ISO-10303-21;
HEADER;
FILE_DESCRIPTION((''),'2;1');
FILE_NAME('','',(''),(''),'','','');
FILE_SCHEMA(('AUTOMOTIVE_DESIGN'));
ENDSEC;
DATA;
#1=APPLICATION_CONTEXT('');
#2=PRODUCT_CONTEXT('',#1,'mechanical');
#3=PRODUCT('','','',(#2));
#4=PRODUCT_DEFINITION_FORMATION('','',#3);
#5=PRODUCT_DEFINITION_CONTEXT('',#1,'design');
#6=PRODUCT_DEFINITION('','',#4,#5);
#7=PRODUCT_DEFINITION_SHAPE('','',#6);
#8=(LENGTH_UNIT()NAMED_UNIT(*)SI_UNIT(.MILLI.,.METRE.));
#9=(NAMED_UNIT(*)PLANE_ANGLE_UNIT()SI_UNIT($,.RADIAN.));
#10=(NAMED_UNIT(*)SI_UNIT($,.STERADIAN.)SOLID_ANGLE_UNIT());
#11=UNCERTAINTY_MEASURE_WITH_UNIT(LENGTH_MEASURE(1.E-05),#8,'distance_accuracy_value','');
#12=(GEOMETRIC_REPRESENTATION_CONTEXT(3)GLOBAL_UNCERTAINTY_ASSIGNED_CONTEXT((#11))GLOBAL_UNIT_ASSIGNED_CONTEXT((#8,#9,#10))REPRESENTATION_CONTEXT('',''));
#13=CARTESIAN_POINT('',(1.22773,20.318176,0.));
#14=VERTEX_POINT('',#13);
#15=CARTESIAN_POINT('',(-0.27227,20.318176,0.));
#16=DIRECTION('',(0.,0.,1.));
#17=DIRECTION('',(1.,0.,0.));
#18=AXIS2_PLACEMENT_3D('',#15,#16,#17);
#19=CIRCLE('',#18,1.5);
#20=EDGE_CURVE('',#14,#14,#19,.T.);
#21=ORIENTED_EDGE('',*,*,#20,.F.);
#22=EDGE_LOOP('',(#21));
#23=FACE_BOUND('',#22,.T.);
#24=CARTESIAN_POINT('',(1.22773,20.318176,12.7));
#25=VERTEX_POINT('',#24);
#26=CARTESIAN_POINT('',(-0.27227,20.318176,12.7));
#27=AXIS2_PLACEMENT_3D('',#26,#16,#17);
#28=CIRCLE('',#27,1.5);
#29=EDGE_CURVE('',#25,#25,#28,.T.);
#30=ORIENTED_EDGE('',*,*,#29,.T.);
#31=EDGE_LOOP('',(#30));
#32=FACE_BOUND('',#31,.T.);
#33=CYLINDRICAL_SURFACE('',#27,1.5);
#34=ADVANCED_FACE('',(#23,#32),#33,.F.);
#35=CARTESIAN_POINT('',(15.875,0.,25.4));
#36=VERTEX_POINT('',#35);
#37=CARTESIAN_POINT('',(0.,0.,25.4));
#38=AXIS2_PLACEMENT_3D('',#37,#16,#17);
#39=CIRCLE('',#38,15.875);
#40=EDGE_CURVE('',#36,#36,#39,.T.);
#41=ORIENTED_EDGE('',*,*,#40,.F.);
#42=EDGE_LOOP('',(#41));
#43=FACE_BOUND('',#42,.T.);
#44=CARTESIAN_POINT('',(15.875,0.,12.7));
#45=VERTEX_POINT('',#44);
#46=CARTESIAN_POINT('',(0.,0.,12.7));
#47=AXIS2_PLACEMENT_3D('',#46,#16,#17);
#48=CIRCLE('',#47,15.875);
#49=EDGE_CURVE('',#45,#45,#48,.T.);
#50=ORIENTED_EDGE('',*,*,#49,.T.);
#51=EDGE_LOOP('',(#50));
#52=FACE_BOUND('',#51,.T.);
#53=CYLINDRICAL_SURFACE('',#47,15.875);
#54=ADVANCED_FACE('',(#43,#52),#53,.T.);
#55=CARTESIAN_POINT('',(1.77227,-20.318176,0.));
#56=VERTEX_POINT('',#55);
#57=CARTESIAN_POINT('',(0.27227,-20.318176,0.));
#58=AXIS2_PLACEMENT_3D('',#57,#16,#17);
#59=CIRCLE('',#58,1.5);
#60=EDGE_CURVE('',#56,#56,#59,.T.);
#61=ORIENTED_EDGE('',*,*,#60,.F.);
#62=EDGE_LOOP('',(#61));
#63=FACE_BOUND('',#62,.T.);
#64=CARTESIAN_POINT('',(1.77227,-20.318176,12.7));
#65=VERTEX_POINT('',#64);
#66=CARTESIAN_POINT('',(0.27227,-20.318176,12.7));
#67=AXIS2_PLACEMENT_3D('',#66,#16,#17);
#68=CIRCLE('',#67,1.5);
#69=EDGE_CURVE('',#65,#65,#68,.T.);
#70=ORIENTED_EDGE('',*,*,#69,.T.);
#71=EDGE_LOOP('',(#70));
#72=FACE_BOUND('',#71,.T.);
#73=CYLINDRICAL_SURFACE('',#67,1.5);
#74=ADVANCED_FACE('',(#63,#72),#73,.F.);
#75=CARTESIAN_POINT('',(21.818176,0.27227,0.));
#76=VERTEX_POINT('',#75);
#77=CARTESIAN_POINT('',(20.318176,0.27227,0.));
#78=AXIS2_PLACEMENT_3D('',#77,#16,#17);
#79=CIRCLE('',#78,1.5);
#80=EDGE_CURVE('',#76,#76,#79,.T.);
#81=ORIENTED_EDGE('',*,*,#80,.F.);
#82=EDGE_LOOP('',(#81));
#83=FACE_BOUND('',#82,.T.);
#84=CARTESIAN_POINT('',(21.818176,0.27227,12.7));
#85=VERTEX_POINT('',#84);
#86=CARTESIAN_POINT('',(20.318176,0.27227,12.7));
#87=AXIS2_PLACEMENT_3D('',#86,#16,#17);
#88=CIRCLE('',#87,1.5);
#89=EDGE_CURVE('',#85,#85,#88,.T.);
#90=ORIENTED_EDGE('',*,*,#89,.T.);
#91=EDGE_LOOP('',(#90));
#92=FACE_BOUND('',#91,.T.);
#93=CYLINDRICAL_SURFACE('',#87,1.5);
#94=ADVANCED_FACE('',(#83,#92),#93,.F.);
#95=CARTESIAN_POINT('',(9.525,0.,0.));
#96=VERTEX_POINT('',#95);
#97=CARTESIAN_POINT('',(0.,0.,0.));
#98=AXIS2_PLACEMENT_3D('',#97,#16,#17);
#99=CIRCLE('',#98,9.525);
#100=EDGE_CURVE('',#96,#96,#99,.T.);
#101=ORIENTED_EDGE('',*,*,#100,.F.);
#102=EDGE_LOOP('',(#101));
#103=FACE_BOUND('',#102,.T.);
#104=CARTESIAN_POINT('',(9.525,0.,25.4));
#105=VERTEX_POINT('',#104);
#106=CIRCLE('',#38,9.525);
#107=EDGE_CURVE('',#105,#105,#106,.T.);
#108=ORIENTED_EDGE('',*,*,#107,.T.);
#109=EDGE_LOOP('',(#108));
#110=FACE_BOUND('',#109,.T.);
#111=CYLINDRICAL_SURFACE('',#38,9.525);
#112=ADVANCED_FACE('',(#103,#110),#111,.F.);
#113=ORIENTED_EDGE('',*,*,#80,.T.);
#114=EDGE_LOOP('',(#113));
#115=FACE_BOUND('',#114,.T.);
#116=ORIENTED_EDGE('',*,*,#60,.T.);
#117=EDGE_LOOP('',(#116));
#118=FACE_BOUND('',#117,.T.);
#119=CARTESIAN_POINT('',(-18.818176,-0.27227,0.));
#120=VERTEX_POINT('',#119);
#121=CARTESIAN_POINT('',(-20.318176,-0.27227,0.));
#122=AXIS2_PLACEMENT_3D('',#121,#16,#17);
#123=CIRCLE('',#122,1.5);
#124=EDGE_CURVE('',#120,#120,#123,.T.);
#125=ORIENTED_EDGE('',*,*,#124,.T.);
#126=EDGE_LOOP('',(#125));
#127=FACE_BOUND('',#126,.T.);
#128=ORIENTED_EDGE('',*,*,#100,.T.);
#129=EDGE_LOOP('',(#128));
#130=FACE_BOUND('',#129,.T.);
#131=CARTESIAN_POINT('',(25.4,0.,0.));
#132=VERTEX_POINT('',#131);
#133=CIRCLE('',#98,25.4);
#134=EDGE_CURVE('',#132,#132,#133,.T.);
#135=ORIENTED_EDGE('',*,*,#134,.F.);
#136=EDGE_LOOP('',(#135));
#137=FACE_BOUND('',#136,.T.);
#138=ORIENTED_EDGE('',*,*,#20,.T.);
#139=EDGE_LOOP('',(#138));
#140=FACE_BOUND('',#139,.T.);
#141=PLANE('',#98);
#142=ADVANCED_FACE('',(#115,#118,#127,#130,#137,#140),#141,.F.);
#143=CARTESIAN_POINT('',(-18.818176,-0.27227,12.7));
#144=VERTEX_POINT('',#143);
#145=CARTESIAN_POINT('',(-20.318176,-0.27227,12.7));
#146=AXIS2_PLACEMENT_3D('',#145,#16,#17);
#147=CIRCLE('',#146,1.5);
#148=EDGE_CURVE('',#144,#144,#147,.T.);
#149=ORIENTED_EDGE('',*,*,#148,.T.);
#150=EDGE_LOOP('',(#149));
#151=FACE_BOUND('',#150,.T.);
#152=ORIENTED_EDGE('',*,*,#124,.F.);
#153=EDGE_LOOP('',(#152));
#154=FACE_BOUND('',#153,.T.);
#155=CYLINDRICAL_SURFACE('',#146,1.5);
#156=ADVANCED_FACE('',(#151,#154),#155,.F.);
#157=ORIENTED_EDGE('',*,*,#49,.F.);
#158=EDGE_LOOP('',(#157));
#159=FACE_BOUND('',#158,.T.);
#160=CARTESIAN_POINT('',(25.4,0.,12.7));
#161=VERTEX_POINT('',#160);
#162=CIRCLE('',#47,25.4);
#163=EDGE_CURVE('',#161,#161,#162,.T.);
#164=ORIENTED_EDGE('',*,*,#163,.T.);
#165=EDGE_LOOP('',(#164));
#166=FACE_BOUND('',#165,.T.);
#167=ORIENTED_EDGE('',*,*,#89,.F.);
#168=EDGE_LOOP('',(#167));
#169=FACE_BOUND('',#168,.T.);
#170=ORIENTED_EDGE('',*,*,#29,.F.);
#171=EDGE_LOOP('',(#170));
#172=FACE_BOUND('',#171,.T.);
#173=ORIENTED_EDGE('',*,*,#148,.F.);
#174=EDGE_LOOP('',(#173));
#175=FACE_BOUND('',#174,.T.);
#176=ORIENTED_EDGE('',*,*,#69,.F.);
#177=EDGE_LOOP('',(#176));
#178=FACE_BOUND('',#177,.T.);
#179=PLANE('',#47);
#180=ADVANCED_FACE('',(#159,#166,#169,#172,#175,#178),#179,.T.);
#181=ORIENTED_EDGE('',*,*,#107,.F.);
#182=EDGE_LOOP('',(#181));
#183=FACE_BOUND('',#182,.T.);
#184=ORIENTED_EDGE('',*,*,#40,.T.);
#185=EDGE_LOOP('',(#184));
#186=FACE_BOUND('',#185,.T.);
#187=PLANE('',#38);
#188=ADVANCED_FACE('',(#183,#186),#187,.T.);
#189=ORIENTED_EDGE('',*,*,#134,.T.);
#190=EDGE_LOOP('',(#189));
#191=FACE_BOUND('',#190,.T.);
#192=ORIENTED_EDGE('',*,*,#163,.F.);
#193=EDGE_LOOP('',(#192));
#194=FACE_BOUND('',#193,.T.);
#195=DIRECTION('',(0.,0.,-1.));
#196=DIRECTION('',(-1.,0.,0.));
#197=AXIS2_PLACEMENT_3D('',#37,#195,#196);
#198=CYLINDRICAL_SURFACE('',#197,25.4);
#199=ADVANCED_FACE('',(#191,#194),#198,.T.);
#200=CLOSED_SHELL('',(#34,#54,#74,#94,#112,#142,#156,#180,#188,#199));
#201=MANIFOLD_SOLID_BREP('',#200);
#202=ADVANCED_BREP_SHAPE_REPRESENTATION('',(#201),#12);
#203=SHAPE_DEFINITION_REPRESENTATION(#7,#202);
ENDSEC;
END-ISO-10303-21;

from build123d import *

# Parameters (mm, degrees)
SKETCH1_R                  = 25.4
BOSS_EXTRUDE1_DEPTH        = 25.4
CUT_EXTRUDE1_START         = -12.7
SKETCH2_R                  = 25.4
SKETCH2_R_2                = 15.875
CUT_EXTRUDE1_DEPTH         = 12.7
F_3_4_0_7500_DOWEL_HOLE1_D = 19.05
F_3_0MM_DOWEL_HOLE1_D      = 3
CRVPATTERN1_OUTLINE_R      = 1.5
CRVPATTERN1_DEPTH          = 12.7


# Read off the part's stored shape, not the designer's step: CrvPattern1
with BuildPart() as part:
    # Sketch1 → Boss-Extrude1 (new body)
    with BuildSketch(Plane.XY):
        Circle(SKETCH1_R)
    extrude(amount=BOSS_EXTRUDE1_DEPTH)

    # Sketch2 → Cut-Extrude1 (cut)
    with BuildSketch(Plane.XY.offset(25.4).offset(CUT_EXTRUDE1_START)):
        Circle(SKETCH2_R)
        Circle(SKETCH2_R_2, mode=Mode.SUBTRACT)
    extrude(amount=CUT_EXTRUDE1_DEPTH, mode=Mode.SUBTRACT)

    # 3/4 (0.7500) Dowel Hole1 (through all)
    with Locations(Plane.XY.offset(25.4)):
        with Locations((0, 0)):
            Hole(F_3_4_0_7500_DOWEL_HOLE1_D / 2)

    # Ø3.0mm Dowel Hole1 (through all)
    with Locations(Plane(origin=(-0.272270363, 20.318175825, 12.7), x_dir=(1, 0, 0), z_dir=(0, 0, 1))):
        with Locations((0, 0)):
            Hole(F_3_0MM_DOWEL_HOLE1_D / 2)

    # CrvPattern1 outline → CrvPattern1 (cut)
    with BuildSketch(Plane.XY):
        with Locations((-20.318175825, -0.272270363)):
            Circle(CRVPATTERN1_OUTLINE_R)
        with Locations((0.272270363, -20.318175825)):
            Circle(CRVPATTERN1_OUTLINE_R)
        with Locations((20.318175825, 0.272270363)):
            Circle(CRVPATTERN1_OUTLINE_R)
    extrude(amount=CRVPATTERN1_DEPTH, mode=Mode.SUBTRACT)


solid = part.part
